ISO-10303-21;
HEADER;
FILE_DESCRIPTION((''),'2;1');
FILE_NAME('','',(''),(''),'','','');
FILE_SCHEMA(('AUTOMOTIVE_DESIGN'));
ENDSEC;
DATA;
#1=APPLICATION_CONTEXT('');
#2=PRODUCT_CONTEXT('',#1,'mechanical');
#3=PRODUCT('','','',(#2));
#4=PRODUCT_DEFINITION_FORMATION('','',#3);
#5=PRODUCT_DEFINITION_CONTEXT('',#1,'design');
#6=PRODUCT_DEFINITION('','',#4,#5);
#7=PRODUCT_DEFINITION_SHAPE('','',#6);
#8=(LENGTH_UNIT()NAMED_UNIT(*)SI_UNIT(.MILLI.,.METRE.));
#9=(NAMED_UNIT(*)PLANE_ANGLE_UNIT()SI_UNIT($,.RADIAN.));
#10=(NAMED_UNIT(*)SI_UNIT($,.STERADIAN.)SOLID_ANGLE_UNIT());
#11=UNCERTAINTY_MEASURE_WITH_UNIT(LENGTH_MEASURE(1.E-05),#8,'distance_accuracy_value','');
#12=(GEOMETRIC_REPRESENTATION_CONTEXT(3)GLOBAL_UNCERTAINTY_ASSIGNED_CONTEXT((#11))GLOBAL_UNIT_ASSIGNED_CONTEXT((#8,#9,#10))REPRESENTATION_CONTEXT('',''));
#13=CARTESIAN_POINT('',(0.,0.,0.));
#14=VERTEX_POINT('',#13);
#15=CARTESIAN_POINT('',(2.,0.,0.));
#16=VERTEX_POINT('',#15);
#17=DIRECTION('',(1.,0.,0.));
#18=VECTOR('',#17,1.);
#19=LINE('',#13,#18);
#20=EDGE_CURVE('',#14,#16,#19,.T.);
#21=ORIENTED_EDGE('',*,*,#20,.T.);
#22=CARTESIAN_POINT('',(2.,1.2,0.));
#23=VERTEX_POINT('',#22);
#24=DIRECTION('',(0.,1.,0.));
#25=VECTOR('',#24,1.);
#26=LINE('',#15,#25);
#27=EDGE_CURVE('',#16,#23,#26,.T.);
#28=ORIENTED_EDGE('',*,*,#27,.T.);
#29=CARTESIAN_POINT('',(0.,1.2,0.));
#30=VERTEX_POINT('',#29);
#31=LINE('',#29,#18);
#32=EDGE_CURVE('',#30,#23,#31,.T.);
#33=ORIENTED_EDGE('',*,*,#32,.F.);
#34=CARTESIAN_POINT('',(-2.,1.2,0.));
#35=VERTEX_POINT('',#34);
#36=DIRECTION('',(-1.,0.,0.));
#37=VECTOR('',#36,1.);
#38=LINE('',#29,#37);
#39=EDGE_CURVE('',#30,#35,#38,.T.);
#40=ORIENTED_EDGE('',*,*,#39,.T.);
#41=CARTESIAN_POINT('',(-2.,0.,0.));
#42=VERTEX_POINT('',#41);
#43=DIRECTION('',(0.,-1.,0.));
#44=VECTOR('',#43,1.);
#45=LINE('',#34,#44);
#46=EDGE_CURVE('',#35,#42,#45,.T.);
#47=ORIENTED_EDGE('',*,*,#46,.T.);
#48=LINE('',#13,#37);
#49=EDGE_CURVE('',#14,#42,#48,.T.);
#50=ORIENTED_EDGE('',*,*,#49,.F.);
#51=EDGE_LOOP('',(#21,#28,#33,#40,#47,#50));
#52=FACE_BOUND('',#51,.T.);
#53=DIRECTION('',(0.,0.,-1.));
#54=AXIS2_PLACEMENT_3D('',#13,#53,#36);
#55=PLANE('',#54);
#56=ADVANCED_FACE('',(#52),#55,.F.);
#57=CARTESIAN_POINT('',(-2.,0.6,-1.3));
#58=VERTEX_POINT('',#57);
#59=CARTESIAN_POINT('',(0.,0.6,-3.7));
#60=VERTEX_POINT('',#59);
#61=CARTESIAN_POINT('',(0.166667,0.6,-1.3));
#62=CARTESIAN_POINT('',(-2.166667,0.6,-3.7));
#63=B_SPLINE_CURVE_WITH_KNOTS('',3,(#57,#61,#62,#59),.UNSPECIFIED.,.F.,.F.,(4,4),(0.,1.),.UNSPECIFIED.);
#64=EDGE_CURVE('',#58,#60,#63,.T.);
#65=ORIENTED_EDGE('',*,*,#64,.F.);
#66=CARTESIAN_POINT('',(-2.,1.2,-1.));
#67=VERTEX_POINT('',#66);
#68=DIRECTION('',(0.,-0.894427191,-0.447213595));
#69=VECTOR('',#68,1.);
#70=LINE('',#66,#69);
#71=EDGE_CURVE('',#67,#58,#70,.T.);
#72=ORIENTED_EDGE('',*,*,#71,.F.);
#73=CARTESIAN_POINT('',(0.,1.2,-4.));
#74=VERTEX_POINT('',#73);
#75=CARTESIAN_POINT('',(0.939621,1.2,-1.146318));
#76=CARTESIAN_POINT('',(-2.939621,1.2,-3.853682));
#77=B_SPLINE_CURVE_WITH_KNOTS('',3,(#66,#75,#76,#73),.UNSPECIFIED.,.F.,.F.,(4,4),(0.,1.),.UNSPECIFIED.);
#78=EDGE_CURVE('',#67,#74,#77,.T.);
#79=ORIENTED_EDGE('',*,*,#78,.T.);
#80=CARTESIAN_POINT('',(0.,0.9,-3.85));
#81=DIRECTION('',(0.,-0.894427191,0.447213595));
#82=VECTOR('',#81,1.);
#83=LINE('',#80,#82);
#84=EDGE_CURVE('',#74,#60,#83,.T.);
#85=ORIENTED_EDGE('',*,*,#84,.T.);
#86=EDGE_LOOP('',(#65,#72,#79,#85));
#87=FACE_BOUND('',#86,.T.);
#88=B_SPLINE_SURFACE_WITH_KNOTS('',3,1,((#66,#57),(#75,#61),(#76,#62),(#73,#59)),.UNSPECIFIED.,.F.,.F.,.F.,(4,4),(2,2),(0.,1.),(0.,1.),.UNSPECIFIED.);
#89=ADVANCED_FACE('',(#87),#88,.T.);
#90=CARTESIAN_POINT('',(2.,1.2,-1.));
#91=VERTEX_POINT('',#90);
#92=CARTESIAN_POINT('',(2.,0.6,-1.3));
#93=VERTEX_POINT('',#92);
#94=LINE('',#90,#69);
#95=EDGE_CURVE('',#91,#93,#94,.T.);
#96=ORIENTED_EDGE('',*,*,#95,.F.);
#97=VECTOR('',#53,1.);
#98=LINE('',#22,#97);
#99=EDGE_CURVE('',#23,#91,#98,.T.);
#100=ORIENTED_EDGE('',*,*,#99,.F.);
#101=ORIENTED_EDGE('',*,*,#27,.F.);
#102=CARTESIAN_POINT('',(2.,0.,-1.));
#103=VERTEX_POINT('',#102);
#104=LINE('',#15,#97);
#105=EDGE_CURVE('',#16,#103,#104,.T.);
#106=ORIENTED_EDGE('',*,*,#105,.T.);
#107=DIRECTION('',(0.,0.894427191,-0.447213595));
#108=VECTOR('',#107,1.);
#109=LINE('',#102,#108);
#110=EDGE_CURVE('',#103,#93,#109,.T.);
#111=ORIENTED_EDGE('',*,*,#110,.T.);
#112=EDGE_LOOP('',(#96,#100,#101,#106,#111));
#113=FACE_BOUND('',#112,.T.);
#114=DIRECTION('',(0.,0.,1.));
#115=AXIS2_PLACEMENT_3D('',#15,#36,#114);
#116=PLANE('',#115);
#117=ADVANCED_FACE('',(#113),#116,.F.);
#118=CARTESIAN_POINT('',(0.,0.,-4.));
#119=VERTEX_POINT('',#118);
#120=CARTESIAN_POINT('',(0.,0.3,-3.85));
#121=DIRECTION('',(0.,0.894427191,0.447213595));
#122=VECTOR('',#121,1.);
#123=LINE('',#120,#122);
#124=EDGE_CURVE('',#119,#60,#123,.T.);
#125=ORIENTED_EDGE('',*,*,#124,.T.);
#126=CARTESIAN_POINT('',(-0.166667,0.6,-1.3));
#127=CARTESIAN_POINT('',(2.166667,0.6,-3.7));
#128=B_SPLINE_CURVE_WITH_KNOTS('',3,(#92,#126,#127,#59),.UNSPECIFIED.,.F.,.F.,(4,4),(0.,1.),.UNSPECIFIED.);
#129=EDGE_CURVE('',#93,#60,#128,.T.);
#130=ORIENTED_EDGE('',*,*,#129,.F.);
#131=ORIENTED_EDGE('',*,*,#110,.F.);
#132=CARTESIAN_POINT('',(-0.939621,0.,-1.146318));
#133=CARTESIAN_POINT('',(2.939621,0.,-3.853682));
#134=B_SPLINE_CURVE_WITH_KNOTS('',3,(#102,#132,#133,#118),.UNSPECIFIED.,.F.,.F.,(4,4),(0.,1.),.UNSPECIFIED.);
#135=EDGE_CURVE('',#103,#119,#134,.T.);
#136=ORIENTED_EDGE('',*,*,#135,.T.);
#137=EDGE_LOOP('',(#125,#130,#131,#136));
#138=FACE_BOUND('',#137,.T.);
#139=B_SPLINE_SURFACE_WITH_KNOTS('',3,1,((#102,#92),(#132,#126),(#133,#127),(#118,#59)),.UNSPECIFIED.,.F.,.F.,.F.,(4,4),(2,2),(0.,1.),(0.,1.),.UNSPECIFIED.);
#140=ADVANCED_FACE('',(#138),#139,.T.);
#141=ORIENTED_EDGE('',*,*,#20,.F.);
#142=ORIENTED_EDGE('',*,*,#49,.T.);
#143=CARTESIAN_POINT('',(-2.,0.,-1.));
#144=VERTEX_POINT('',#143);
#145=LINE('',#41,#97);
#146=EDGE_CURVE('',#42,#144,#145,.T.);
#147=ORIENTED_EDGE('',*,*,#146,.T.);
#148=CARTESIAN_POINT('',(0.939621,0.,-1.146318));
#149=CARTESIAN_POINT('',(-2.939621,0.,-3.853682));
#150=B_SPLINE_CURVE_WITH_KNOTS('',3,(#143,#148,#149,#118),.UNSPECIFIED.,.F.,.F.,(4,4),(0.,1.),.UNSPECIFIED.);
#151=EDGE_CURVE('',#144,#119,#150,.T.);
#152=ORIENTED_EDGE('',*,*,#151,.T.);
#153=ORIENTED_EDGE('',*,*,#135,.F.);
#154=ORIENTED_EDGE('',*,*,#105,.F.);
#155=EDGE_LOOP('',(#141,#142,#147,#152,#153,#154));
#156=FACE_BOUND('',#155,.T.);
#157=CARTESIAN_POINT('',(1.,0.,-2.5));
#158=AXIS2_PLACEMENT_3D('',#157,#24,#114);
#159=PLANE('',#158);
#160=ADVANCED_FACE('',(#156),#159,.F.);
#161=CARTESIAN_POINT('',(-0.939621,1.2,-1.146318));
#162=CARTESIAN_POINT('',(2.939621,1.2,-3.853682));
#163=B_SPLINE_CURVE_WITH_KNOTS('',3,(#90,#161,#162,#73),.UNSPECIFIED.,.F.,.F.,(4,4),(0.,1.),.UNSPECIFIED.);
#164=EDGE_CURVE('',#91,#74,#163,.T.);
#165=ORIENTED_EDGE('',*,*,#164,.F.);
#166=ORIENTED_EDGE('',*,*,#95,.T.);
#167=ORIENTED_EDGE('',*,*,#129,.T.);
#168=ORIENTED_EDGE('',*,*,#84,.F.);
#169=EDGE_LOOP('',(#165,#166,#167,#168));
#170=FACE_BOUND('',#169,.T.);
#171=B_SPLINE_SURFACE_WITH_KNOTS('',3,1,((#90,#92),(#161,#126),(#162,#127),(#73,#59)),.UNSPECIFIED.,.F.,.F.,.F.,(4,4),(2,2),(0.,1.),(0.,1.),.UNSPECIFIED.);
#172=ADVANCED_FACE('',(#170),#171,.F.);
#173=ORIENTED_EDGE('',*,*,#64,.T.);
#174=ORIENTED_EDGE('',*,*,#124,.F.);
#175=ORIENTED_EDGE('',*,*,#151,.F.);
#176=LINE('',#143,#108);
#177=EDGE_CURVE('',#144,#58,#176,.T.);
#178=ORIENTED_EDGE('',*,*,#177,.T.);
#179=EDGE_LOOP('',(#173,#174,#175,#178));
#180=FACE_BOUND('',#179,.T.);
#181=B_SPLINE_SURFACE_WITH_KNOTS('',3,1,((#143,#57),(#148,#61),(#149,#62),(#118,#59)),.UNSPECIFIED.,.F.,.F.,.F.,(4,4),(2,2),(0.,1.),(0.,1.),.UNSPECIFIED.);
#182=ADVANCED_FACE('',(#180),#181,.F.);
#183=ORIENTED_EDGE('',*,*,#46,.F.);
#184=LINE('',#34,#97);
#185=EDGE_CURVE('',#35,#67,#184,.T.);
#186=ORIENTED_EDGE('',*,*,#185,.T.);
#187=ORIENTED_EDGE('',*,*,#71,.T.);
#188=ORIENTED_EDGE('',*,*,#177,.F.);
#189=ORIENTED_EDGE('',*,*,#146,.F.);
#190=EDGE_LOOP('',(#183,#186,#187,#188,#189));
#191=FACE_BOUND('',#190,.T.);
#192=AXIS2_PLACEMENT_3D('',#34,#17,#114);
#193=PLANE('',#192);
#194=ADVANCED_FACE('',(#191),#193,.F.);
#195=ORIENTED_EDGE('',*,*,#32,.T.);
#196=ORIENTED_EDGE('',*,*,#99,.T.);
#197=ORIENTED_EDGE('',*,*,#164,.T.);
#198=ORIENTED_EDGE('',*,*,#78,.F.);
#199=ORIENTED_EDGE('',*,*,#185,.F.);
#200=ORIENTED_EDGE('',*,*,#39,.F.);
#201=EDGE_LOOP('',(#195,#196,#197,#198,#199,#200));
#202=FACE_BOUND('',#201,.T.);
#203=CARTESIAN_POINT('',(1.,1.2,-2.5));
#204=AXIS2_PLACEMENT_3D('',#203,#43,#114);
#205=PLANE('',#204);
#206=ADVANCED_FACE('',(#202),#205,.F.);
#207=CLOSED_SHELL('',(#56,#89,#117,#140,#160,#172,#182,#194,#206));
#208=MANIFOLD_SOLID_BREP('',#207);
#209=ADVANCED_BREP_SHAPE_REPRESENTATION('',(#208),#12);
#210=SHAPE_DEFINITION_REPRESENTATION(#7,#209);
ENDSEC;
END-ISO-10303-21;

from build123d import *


# Read off the part's stored shape, not the designer's step: Mirror2
with BuildPart() as part:
    # Sketch1 → Loft1 section 0
    with BuildSketch(Plane(origin=(0, 0, 0), x_dir=(1, 0, 0), z_dir=(0, 1, 0))):
        with BuildLine():
            Line((0, 0), (2, 0))
            Line((2, 0), (2, 1))
            add(Edge.make_bspline(
                [(0, 4), (2.939621294, 3.853681673), (-0.939621294, 1.146318327), (2, 1)],
                knots=[0, 0, 0, 0, 1, 1, 1, 1], degree=3))
            Line((0, 4), (0, 0))
        make_face()
    # Sketch2 → Loft1 section 1
    with BuildSketch(Plane(origin=(0, 0.6, 0), x_dir=(1, 0, 0), z_dir=(0, 1, 0))):
        with BuildLine():
            Line((0, 0), (2, 0))
            Line((2, 0), (2, 1.3))
            add(Edge.make_bspline(
                [(0, 3.7), (2.166666667, 3.7), (-0.166666667, 1.3), (2, 1.3)],
                knots=[0, 0, 0, 0, 1, 1, 1, 1], degree=3))
            Line((0, 3.7), (0, 0))
        make_face()
    loft1 = loft()

    # Mirror1: Loft1 across plane
    add(loft1.mirror(Plane.ZX.offset(0.6)))

    # Mirror2: part across plane


with BuildPart() as part_1:
    add(part.part)
    add(part.part.mirror(Plane(origin=(0, 0, 0), x_dir=(0, 0, 1), z_dir=(1, 0, 0))))


solid = part_1.part
